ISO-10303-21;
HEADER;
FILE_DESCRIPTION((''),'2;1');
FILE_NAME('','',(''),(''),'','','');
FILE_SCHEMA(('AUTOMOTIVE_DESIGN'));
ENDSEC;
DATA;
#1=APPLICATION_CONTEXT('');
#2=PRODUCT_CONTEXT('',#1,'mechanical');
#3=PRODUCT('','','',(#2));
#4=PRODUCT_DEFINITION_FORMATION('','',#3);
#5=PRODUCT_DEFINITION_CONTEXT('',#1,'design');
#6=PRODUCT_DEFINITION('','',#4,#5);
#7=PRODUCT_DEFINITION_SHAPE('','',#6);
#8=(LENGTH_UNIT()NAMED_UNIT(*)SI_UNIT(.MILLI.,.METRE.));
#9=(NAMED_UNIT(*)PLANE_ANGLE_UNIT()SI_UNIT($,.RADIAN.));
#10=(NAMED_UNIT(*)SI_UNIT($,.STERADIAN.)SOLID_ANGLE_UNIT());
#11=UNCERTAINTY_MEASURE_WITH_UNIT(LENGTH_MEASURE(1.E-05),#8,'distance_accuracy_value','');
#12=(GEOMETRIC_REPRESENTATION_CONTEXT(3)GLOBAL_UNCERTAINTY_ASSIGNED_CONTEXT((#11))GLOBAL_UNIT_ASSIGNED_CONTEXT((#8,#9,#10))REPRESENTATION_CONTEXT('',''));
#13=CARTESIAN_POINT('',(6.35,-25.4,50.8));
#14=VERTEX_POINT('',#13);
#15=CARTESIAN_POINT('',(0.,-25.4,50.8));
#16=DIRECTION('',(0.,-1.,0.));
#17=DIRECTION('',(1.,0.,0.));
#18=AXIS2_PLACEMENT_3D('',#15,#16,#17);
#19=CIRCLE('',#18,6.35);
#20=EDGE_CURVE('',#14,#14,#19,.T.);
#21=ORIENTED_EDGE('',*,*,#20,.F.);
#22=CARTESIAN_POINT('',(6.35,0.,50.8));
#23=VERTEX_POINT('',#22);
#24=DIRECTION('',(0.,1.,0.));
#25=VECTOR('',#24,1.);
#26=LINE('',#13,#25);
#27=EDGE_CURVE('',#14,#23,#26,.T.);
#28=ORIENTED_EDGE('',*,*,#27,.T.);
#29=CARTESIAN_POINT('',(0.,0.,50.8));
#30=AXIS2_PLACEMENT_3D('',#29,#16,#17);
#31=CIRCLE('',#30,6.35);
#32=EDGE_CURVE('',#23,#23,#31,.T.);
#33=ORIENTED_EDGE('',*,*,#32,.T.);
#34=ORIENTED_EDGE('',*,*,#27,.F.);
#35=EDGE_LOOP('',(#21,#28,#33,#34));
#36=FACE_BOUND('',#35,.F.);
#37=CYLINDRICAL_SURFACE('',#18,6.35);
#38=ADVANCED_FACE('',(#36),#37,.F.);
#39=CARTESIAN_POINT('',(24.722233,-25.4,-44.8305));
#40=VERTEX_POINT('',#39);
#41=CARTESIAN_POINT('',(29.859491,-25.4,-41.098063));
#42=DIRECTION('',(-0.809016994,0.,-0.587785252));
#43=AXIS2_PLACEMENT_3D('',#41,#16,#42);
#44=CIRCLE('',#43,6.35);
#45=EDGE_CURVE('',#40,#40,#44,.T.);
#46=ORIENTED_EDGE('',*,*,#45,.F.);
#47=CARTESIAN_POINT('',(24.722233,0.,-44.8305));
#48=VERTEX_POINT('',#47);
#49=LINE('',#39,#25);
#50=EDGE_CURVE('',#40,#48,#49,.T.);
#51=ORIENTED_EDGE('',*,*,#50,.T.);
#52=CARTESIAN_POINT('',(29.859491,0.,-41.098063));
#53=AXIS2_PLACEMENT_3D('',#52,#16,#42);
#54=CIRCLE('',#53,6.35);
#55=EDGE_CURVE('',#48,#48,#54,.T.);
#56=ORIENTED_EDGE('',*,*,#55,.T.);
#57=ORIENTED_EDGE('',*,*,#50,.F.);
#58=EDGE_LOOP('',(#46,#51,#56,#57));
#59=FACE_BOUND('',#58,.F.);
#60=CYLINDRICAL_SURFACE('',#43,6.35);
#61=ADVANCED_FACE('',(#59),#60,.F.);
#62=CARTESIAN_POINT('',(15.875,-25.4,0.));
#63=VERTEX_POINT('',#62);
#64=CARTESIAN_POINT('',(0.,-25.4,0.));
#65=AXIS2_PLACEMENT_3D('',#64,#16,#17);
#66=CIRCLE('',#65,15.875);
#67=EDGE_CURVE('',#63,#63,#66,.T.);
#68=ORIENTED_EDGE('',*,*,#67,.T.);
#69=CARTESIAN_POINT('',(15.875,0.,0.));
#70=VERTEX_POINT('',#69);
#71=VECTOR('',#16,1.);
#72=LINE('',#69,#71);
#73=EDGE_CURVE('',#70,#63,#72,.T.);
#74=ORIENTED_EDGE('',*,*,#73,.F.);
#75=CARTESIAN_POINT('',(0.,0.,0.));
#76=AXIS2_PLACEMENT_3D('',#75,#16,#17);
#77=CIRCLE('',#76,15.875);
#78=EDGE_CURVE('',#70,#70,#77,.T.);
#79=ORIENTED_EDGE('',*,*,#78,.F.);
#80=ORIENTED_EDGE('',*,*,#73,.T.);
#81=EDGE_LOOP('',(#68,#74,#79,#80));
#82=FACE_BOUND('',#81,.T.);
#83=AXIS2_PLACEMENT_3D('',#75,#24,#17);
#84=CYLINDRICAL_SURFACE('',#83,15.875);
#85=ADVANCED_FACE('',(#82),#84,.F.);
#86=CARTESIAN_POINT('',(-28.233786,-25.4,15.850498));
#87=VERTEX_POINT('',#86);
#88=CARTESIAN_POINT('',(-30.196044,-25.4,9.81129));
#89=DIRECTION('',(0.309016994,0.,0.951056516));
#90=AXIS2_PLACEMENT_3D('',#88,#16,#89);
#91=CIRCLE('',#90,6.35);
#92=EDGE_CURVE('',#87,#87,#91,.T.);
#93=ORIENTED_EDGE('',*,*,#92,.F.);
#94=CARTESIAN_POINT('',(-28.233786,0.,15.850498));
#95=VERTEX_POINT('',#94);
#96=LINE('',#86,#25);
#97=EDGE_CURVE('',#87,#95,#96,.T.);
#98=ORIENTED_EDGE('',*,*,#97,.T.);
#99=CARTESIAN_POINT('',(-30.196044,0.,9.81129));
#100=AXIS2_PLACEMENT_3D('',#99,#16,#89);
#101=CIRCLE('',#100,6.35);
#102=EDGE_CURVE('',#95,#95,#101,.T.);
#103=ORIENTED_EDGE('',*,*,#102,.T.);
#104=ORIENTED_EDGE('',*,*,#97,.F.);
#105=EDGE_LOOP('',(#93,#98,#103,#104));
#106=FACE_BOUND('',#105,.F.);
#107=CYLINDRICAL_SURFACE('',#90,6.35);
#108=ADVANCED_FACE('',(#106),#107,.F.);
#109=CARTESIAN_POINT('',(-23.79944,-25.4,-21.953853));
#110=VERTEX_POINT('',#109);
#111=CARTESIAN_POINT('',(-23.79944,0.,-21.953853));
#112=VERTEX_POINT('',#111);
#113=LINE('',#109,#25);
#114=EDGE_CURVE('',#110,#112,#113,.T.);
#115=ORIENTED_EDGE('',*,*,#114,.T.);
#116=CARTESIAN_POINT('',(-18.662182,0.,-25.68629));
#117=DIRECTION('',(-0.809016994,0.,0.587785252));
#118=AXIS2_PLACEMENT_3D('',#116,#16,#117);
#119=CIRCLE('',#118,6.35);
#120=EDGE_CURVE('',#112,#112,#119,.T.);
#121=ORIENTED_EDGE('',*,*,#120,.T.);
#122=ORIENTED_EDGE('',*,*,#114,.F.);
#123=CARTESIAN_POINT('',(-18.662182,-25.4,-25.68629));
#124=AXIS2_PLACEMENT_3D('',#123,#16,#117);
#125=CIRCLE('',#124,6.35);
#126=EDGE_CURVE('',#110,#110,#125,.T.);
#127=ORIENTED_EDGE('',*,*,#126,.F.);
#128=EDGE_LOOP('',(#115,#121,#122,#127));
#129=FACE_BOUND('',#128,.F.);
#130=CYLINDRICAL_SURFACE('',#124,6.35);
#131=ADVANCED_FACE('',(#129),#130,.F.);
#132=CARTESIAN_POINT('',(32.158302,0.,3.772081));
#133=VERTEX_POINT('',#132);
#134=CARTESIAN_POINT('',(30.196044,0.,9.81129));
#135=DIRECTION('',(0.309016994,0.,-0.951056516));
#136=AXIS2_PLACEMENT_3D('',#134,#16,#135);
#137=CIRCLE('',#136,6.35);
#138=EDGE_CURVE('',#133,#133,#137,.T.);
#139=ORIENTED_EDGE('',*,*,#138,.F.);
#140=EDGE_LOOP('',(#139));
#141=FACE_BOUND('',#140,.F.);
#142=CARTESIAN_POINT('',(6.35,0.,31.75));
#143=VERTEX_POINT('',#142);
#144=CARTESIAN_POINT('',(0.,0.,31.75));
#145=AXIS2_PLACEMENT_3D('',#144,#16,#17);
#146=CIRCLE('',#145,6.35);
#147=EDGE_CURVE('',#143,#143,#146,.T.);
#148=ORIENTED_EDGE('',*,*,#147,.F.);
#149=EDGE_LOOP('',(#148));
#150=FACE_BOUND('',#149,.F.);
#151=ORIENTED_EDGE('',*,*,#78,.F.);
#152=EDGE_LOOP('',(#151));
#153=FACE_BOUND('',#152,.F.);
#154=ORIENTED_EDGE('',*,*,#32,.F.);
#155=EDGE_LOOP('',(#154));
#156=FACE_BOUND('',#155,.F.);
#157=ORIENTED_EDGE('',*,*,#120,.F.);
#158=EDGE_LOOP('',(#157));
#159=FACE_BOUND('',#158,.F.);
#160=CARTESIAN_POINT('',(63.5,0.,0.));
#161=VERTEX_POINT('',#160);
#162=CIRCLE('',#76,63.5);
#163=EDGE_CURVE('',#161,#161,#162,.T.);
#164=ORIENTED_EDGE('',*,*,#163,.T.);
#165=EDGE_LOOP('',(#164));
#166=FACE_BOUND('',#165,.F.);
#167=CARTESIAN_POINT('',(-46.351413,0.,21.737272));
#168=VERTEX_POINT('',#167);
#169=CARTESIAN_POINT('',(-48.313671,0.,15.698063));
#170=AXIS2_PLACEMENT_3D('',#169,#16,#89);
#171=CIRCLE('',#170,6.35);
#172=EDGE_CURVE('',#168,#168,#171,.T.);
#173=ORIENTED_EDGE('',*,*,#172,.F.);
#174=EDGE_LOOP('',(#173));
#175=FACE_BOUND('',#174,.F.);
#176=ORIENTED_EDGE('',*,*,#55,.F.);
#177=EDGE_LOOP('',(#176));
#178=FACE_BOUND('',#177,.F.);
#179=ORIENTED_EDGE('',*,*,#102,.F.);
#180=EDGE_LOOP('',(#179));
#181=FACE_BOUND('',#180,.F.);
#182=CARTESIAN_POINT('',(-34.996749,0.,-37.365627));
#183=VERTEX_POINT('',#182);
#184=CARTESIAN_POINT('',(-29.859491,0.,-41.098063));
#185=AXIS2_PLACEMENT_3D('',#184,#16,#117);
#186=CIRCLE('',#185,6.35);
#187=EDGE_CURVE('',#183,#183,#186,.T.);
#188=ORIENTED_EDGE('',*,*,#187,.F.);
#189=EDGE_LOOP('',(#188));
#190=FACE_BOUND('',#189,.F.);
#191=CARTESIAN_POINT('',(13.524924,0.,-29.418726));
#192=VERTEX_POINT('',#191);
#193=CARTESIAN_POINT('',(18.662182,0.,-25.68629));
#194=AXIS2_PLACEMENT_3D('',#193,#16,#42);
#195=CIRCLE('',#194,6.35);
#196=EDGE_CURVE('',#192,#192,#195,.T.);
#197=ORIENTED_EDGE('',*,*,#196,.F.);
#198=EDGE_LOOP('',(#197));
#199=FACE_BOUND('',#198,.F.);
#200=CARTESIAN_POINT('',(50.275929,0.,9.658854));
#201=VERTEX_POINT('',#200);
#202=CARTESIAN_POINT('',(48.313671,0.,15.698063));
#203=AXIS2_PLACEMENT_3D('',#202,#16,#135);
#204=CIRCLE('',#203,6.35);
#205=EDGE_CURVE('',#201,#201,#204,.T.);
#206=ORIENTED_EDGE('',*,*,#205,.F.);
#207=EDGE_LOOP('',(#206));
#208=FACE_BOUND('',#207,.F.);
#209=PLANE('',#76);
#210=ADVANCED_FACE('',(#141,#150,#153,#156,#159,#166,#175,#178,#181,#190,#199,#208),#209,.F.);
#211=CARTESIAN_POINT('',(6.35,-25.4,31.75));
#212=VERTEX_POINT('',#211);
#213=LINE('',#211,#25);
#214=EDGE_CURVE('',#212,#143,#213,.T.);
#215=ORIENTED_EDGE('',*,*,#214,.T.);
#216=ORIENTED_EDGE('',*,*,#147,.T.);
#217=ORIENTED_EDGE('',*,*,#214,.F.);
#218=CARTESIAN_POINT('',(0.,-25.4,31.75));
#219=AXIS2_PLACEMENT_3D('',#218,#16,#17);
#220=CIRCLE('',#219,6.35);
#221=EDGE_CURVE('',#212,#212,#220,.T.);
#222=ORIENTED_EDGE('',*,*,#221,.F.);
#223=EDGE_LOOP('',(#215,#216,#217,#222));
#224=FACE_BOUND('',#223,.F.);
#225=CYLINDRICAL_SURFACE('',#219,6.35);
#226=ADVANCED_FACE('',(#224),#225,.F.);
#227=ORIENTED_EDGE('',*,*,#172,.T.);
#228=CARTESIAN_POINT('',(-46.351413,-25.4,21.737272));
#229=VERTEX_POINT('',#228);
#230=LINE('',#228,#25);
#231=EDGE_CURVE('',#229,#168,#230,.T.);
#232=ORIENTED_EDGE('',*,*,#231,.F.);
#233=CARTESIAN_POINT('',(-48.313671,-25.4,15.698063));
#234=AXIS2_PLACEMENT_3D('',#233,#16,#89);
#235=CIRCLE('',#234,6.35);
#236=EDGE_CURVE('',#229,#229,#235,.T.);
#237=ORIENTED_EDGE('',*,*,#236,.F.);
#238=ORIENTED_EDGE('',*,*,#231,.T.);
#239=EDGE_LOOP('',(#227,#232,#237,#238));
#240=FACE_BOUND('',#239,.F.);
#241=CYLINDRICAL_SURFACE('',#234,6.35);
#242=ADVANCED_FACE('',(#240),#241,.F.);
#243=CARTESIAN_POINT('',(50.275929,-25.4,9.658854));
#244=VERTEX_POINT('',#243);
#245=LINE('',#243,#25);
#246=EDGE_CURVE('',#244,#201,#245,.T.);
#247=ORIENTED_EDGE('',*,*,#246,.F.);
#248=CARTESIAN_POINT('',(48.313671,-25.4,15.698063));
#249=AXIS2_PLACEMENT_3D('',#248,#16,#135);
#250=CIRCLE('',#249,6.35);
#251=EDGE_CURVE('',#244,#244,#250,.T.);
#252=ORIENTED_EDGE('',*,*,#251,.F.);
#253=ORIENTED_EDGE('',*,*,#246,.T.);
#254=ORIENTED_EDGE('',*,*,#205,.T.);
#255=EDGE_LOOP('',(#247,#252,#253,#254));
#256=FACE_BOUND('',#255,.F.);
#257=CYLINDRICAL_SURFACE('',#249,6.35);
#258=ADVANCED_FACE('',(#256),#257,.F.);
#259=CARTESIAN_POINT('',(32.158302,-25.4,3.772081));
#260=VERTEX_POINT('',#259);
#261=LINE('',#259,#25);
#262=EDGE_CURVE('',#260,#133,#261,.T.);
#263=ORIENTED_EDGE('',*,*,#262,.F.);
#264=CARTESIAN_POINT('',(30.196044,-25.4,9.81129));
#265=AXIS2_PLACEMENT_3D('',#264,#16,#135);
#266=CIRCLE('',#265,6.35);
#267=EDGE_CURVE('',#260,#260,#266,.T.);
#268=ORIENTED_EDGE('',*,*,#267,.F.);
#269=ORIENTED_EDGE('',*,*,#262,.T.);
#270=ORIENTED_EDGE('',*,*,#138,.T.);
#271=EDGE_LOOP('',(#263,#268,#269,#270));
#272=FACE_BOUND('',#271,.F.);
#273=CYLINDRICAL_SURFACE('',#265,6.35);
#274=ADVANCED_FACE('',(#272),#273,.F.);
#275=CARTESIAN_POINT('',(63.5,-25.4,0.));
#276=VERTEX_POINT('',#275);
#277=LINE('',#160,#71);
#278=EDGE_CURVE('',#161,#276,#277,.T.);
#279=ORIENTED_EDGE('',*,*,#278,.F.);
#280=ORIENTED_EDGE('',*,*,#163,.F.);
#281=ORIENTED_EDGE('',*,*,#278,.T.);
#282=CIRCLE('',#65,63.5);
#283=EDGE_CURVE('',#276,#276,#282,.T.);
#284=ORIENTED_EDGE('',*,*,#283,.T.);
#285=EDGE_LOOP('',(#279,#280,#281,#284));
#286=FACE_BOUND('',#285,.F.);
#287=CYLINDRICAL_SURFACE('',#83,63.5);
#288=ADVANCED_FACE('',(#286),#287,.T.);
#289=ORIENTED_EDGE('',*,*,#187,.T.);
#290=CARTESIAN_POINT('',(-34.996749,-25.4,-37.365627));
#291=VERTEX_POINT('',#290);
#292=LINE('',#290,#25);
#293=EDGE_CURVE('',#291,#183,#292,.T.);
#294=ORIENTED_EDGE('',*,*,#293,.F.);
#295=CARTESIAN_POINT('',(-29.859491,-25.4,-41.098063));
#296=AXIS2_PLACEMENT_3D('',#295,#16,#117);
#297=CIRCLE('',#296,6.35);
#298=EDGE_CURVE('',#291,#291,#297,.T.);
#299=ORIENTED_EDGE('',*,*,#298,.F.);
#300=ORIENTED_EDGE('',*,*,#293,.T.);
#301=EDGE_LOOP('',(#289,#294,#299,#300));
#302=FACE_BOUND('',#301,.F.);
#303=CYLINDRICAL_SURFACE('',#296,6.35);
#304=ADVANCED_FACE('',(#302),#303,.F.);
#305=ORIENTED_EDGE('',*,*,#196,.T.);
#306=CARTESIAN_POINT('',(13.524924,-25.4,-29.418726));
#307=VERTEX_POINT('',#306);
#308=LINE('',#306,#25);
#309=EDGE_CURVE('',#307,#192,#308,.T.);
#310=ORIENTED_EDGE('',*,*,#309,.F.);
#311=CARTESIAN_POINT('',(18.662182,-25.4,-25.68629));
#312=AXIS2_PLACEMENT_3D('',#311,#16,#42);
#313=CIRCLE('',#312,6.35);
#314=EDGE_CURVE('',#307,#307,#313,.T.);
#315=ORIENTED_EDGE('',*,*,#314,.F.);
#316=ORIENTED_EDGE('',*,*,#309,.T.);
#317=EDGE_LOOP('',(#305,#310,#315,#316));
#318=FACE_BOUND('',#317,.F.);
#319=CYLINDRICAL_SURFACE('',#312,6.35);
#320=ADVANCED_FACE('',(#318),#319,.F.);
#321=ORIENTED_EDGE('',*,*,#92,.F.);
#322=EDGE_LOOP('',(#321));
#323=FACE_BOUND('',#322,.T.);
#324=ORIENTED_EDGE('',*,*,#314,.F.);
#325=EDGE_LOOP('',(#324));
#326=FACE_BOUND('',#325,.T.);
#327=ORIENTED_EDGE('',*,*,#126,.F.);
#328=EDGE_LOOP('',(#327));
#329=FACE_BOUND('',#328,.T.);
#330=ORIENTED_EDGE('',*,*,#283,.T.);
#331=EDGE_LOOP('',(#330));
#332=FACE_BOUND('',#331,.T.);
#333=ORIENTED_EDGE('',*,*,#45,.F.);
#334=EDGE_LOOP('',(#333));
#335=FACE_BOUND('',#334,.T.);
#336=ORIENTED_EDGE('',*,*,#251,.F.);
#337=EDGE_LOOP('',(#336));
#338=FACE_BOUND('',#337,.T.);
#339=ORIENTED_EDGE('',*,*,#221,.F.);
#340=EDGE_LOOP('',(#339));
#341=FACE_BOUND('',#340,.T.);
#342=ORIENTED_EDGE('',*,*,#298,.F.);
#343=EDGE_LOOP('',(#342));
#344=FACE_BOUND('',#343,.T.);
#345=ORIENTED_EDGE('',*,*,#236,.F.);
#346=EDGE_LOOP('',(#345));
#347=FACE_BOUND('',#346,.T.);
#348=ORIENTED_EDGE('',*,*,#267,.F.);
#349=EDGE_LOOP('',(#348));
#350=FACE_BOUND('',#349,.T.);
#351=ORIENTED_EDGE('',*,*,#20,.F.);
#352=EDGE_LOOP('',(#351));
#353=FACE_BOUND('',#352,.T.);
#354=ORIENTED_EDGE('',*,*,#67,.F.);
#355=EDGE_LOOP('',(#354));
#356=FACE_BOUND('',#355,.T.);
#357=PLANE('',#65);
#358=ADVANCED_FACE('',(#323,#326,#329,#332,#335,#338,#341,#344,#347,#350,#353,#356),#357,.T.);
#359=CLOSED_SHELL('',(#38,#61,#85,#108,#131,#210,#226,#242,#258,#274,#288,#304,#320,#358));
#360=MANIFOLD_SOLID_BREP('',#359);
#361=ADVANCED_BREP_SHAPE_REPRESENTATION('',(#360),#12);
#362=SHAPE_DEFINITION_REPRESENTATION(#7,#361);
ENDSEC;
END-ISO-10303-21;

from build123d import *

# Parameters (mm, degrees)
F0_R            = 63.5
F0_R_2          = 15.875
F1_DEPTH        = 25.4
F2_R            = 6.35
F3_DEPTH        = 25.4
F3_COPIES_COUNT = 5


# Not quite as in the source:
# - a pattern or mirror of a feature is missing from the dataset's text; its kind, count and spacing are read off the source's solid


with BuildPart() as f1:
    # F0 (on Front) → F1 (new body)
    with BuildSketch(Plane.XZ):
        Circle(F0_R)
        Circle(F0_R_2, mode=Mode.SUBTRACT)
    extrude(amount=F1_DEPTH)

    # F2 (on face) → F3 (cut, through all)
    with BuildSketch(Plane.XZ.offset(25.4)):
        with Locations((0, 50.8)):
            Circle(F2_R)
        with Locations((0, 31.75)):
            Circle(F2_R)
    f3 = extrude(amount=-F3_DEPTH, mode=Mode.SUBTRACT)

    # F3_copies: F3 ×5 about axis
    f3_copies_axis = Axis((0, 0, 0), (0, 1, 0))
    for i in range(1, F3_COPIES_COUNT):
        add(f3.rotate(f3_copies_axis, i * 360 / F3_COPIES_COUNT), mode=Mode.SUBTRACT)


solid = f1.part
